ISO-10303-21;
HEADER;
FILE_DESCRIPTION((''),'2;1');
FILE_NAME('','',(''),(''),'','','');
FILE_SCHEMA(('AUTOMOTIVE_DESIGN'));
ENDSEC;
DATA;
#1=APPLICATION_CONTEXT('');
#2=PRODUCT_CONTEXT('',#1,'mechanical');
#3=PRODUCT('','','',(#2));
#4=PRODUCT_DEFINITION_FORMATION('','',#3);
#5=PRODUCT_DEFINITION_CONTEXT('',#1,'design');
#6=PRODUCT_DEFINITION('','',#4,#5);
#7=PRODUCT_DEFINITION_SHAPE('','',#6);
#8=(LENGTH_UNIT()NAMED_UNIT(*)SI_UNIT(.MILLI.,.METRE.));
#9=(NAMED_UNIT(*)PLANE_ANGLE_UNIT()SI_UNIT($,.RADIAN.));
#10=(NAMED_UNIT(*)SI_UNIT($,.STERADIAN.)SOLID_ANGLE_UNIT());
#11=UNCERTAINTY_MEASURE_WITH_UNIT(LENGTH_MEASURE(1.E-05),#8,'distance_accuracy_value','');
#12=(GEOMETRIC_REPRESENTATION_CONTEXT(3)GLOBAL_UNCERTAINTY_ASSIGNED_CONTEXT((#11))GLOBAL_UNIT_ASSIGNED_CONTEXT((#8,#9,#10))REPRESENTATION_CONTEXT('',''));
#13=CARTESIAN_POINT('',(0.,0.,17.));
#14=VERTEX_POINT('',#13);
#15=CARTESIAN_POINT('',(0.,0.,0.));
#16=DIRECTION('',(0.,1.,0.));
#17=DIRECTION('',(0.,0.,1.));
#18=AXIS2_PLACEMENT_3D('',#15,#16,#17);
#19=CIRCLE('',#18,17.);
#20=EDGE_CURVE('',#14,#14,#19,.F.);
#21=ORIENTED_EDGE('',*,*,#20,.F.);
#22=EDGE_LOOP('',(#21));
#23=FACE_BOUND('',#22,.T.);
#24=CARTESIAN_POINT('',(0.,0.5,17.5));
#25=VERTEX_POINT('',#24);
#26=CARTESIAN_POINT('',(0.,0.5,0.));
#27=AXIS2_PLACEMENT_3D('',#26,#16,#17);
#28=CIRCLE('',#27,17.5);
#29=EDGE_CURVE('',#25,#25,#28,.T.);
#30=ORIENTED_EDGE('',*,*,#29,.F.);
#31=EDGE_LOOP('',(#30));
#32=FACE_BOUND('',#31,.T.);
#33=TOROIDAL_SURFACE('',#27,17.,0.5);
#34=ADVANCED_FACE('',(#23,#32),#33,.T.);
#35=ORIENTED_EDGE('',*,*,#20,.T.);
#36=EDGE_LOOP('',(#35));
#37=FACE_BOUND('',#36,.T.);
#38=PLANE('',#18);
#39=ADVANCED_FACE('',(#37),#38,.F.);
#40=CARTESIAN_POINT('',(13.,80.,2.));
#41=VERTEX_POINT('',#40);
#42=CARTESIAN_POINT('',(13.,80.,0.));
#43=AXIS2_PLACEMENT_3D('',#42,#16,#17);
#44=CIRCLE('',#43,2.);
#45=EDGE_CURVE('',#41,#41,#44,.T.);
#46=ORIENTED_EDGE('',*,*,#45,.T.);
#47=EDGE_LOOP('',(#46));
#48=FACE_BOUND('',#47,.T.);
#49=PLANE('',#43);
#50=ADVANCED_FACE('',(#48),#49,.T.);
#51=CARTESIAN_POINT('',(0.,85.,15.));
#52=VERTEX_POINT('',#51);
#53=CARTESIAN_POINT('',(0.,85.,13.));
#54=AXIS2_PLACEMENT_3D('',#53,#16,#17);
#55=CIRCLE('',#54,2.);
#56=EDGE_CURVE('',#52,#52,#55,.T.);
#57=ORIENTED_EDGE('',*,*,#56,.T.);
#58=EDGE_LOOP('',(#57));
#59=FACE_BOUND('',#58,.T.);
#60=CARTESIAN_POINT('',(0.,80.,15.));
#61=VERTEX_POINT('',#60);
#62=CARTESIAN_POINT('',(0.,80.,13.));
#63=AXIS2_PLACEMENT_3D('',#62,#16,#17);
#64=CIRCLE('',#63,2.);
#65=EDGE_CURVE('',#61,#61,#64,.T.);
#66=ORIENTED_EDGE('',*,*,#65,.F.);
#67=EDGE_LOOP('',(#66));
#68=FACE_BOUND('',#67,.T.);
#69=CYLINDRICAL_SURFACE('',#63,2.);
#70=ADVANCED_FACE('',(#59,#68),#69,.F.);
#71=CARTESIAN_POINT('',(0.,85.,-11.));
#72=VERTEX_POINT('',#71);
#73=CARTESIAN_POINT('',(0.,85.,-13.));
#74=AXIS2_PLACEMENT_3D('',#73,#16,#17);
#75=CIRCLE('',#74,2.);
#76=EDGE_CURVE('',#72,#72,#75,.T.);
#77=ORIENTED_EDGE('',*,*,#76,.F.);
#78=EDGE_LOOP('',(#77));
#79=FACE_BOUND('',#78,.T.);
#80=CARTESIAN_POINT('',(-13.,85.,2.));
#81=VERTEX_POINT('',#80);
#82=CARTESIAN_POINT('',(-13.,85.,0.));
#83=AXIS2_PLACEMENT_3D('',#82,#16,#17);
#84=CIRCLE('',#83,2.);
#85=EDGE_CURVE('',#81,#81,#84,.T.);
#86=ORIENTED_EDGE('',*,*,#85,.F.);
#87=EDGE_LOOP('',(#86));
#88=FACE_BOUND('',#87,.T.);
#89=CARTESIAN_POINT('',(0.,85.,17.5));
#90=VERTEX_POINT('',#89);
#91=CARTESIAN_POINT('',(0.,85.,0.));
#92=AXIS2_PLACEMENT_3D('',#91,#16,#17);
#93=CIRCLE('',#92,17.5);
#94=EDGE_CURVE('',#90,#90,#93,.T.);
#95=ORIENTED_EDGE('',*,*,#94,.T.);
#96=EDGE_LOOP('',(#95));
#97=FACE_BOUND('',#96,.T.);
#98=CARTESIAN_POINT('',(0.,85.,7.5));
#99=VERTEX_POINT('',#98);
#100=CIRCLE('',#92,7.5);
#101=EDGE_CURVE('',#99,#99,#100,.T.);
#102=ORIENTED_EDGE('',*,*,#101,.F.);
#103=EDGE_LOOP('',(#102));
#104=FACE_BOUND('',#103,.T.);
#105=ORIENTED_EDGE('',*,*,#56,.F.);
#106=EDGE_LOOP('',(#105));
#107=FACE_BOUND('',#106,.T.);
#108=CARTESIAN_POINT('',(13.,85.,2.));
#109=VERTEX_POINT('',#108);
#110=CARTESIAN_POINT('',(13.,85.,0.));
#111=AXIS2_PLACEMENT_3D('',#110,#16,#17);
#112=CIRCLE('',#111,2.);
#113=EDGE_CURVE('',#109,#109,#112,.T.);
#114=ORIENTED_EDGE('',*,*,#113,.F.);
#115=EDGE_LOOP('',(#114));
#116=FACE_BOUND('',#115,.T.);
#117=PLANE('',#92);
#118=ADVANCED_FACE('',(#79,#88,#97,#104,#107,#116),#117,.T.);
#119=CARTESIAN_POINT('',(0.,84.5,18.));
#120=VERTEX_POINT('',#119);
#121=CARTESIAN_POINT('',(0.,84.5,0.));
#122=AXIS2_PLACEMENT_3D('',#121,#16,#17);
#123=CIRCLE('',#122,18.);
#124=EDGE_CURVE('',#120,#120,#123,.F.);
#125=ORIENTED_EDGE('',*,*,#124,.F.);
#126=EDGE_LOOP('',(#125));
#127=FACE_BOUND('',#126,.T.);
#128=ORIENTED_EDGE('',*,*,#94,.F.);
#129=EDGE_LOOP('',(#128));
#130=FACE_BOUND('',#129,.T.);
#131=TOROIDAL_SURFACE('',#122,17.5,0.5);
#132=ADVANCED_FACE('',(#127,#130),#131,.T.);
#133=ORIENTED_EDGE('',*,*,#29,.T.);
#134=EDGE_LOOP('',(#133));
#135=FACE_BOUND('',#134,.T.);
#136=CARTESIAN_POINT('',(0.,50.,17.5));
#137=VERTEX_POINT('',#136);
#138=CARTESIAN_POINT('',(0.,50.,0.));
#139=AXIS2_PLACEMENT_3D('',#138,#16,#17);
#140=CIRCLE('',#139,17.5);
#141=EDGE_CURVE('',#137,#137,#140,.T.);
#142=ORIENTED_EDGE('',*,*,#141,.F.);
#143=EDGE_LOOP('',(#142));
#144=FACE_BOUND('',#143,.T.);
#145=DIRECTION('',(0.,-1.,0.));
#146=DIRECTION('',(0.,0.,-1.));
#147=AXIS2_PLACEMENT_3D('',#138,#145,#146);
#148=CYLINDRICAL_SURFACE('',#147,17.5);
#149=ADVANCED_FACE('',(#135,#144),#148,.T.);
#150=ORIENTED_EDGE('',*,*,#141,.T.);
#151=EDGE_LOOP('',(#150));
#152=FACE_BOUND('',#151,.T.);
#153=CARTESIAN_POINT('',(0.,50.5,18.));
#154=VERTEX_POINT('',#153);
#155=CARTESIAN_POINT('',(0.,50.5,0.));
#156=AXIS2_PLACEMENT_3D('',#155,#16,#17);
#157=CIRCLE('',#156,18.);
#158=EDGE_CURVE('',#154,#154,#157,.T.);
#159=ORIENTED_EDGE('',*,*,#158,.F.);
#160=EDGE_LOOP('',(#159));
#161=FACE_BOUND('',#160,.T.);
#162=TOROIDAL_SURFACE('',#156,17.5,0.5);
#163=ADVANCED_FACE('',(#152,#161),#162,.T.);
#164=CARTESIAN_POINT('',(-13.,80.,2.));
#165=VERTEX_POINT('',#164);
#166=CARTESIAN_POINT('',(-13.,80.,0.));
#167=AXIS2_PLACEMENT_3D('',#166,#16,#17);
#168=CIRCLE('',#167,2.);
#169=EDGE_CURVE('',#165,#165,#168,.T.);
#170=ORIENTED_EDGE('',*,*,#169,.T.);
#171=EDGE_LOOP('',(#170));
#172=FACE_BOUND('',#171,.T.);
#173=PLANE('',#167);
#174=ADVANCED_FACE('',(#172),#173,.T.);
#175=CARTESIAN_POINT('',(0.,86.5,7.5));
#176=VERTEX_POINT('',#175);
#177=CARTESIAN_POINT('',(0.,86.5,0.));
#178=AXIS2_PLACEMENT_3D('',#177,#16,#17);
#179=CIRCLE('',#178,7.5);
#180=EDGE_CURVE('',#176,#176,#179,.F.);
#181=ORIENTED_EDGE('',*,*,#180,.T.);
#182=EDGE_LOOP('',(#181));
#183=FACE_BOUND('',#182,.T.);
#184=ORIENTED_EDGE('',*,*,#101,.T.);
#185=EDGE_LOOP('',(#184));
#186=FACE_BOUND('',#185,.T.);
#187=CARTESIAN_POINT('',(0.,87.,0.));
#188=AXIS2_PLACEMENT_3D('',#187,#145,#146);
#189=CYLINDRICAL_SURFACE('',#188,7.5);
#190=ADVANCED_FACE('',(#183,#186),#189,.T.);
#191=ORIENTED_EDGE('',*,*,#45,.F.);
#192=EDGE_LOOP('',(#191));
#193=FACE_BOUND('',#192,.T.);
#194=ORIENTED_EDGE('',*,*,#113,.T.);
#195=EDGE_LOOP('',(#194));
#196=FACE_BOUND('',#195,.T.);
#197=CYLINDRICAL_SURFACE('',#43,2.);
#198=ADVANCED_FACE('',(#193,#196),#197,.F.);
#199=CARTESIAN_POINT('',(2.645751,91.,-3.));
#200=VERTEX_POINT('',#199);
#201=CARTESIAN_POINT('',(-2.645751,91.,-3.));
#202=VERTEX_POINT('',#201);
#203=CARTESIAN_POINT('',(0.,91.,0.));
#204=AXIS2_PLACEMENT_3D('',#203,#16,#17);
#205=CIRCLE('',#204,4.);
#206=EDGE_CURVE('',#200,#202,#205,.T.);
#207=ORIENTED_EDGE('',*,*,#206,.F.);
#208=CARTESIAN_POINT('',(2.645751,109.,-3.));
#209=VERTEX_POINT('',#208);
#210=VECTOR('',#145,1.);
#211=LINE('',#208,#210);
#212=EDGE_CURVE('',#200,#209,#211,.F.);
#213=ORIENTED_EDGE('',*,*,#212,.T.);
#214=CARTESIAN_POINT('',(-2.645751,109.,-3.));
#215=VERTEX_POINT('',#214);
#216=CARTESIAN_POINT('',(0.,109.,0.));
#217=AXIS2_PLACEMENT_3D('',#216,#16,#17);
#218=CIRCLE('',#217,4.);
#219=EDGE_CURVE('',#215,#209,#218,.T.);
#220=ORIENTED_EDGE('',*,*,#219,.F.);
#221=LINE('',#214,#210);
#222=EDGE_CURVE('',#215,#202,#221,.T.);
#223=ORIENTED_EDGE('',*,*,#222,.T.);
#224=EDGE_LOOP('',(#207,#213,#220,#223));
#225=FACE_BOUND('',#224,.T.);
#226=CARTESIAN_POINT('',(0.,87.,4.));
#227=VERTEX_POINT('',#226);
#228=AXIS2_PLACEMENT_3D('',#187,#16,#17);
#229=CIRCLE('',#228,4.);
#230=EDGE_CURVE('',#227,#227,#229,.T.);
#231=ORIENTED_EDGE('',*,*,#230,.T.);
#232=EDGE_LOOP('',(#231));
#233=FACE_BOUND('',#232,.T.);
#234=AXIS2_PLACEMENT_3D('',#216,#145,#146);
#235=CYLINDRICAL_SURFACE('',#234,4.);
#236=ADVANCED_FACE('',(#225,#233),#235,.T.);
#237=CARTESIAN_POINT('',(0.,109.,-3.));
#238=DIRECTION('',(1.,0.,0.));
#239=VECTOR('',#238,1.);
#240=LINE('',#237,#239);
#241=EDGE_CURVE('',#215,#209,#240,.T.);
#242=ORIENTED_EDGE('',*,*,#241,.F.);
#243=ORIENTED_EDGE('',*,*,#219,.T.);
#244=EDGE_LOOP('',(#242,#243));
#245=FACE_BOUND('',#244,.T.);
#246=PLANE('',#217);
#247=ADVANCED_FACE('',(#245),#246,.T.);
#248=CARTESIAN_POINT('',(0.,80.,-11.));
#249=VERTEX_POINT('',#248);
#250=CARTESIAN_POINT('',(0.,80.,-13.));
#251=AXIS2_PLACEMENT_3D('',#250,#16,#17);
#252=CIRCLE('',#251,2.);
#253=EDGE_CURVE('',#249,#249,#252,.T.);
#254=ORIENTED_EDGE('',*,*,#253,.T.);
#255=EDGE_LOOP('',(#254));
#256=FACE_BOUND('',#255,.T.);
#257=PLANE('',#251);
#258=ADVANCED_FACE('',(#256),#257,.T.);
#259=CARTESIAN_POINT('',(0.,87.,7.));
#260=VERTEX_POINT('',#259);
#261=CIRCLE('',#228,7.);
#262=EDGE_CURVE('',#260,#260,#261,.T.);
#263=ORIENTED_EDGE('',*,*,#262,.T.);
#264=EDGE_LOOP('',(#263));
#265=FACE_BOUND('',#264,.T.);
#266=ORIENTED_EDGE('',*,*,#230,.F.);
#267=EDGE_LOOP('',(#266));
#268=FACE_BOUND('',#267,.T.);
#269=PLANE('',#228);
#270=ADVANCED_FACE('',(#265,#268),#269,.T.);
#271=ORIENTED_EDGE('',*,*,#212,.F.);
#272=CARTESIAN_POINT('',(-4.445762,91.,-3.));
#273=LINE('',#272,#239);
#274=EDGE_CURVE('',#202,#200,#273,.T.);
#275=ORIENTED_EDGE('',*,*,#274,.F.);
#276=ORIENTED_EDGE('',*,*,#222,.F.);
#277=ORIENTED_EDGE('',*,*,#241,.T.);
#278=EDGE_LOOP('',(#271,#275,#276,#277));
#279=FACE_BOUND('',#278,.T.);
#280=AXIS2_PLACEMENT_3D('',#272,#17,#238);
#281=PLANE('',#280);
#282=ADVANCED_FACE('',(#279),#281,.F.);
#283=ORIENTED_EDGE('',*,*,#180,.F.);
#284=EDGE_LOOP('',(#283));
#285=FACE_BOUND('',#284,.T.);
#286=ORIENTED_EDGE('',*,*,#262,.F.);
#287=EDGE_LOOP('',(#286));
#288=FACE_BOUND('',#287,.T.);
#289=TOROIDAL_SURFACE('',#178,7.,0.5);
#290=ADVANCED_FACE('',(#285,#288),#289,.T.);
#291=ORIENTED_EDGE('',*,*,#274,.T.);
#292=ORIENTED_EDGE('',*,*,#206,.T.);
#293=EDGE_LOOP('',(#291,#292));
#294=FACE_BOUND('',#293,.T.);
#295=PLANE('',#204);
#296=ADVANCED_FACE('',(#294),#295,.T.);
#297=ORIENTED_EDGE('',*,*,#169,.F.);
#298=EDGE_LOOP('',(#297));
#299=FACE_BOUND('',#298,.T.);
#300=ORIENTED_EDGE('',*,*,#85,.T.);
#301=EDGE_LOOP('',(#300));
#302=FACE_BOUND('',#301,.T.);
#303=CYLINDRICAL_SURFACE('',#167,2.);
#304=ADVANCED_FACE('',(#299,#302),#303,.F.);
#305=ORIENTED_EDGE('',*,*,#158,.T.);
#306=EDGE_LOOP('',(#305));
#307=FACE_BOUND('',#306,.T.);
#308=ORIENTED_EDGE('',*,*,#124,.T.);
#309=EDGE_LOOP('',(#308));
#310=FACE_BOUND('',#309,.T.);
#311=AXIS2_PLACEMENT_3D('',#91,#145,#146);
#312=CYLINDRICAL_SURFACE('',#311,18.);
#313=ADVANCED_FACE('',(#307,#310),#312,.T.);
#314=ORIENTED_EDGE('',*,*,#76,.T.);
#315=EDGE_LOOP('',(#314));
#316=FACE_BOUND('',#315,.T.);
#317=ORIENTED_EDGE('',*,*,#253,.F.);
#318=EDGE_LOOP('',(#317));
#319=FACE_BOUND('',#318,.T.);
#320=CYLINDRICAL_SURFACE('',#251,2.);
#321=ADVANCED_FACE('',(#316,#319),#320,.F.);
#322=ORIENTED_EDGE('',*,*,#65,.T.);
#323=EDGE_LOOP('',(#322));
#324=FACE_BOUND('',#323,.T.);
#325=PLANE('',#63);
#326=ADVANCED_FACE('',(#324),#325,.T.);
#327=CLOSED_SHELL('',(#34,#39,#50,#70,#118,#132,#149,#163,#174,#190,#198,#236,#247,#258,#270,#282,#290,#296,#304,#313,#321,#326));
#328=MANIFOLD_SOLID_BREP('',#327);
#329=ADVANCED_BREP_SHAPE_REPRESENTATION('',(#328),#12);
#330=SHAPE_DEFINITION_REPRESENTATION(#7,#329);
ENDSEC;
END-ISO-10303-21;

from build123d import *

# Parameters (mm, degrees)
SKETCH_1_R          = 17.5
EXTRUDE_1_DEPTH     = 50
SKETCH_3_R          = 18
EXTRUDE_4_DEPTH     = 35
SKETCH_4_R          = 7.5
EXTRUDE_5_DEPTH     = 2
SKETCH_5_R          = 4
EXTRUDE_6_DEPTH     = 22
SKETCH_6_R          = 2
CUT_EXTRUDE_1_DEPTH = 5
SKETCH_7_W          = 8.061647896
SKETCH_7_H          = 1.71902786
CUT_EXTRUDE_2_DEPTH = 18
FILLET_10_R         = 0.5
FILLET_11_R         = 0.5
FILLET_12_R         = 0.5
FILLET_13_R         = 0.5


with BuildPart() as part:
    # 草图1 → 凸台-拉伸1 (new body)
    with BuildSketch(Plane(origin=(0, 0, 0), x_dir=(1, 0, 0), z_dir=(0, 1, 0))):
        with Locations(Location((0, 0, 0), (0, 0, 270))):
            Circle(SKETCH_1_R)
    extrude(amount=EXTRUDE_1_DEPTH)

    # 草图3 → 凸台-拉伸4 (add)
    with BuildSketch(Plane(origin=(0, 50, 0), x_dir=(1, 0, 0), z_dir=(0, 1, 0))):
        with Locations(Location((0, 0, 0), (0, 0, 270))):
            Circle(SKETCH_3_R)
    extrude(amount=EXTRUDE_4_DEPTH)

    # 草图4 → 凸台-拉伸5 (add)
    with BuildSketch(Plane(origin=(0, 85, 0), x_dir=(1, 0, 0), z_dir=(0, 1, 0))):
        with Locations(Location((0, 0, 0), (0, 0, 270))):
            Circle(SKETCH_4_R)
    extrude(amount=EXTRUDE_5_DEPTH)

    # 草图5 → 凸台-拉伸6 (add)
    with BuildSketch(Plane(origin=(0, 87, 0), x_dir=(1, 0, 0), z_dir=(0, 1, 0))):
        with Locations(Location((0, 0, 0), (0, 0, 270))):
            Circle(SKETCH_5_R)
    extrude(amount=EXTRUDE_6_DEPTH)

    # 草图6 → 切除-拉伸1 (cut)
    with BuildSketch(Plane(origin=(0, 85, 0), x_dir=(1, 0, 0), z_dir=(0, 1, 0))):
        with Locations(Location((0, 13, 0), (0, 0, 270))):
            Circle(SKETCH_6_R)
        with Locations(Location((13, 0, 0), (0, 0, 270))):
            Circle(SKETCH_6_R)
        with Locations(Location((0, -13, 0), (0, 0, 270))):
            Circle(SKETCH_6_R)
        with Locations(Location((-13, 0, 0), (0, 0, 270))):
            Circle(SKETCH_6_R)
    extrude(amount=-CUT_EXTRUDE_1_DEPTH, mode=Mode.SUBTRACT)

    # 草图7 → 切除-拉伸2 (cut)
    with BuildSketch(Plane(origin=(0, 109, 0), x_dir=(1, 0, 0), z_dir=(0, 1, 0))):
        with Locations((-0.414937759, 3.85951393)):
            Rectangle(SKETCH_7_W, SKETCH_7_H)
    extrude(amount=-CUT_EXTRUDE_2_DEPTH, mode=Mode.SUBTRACT)

    # 圆角10
    fillet_10_edges = [part.edges().sort_by_distance(p)[0] for p in [
        (0, 85, -18),
    ]]
    fillet(fillet_10_edges, radius=FILLET_10_R)

    # 圆角11
    fillet_11_edges = [part.edges().sort_by_distance(p)[0] for p in [
        (0, 50, -18),
    ]]
    fillet(fillet_11_edges, radius=FILLET_11_R - 0.0001)  # a hair under: the kernel refuses the full size

    # 圆角12
    fillet_12_edges = [part.edges().sort_by_distance(p)[0] for p in [
        (0, 0, -17.5),
    ]]
    fillet(fillet_12_edges, radius=FILLET_12_R)

    # 圆角13
    fillet_13_edges = [part.edges().sort_by_distance(p)[0] for p in [
        (0, 87, -7.5),
    ]]
    fillet(fillet_13_edges, radius=FILLET_13_R)


solid = part.part
